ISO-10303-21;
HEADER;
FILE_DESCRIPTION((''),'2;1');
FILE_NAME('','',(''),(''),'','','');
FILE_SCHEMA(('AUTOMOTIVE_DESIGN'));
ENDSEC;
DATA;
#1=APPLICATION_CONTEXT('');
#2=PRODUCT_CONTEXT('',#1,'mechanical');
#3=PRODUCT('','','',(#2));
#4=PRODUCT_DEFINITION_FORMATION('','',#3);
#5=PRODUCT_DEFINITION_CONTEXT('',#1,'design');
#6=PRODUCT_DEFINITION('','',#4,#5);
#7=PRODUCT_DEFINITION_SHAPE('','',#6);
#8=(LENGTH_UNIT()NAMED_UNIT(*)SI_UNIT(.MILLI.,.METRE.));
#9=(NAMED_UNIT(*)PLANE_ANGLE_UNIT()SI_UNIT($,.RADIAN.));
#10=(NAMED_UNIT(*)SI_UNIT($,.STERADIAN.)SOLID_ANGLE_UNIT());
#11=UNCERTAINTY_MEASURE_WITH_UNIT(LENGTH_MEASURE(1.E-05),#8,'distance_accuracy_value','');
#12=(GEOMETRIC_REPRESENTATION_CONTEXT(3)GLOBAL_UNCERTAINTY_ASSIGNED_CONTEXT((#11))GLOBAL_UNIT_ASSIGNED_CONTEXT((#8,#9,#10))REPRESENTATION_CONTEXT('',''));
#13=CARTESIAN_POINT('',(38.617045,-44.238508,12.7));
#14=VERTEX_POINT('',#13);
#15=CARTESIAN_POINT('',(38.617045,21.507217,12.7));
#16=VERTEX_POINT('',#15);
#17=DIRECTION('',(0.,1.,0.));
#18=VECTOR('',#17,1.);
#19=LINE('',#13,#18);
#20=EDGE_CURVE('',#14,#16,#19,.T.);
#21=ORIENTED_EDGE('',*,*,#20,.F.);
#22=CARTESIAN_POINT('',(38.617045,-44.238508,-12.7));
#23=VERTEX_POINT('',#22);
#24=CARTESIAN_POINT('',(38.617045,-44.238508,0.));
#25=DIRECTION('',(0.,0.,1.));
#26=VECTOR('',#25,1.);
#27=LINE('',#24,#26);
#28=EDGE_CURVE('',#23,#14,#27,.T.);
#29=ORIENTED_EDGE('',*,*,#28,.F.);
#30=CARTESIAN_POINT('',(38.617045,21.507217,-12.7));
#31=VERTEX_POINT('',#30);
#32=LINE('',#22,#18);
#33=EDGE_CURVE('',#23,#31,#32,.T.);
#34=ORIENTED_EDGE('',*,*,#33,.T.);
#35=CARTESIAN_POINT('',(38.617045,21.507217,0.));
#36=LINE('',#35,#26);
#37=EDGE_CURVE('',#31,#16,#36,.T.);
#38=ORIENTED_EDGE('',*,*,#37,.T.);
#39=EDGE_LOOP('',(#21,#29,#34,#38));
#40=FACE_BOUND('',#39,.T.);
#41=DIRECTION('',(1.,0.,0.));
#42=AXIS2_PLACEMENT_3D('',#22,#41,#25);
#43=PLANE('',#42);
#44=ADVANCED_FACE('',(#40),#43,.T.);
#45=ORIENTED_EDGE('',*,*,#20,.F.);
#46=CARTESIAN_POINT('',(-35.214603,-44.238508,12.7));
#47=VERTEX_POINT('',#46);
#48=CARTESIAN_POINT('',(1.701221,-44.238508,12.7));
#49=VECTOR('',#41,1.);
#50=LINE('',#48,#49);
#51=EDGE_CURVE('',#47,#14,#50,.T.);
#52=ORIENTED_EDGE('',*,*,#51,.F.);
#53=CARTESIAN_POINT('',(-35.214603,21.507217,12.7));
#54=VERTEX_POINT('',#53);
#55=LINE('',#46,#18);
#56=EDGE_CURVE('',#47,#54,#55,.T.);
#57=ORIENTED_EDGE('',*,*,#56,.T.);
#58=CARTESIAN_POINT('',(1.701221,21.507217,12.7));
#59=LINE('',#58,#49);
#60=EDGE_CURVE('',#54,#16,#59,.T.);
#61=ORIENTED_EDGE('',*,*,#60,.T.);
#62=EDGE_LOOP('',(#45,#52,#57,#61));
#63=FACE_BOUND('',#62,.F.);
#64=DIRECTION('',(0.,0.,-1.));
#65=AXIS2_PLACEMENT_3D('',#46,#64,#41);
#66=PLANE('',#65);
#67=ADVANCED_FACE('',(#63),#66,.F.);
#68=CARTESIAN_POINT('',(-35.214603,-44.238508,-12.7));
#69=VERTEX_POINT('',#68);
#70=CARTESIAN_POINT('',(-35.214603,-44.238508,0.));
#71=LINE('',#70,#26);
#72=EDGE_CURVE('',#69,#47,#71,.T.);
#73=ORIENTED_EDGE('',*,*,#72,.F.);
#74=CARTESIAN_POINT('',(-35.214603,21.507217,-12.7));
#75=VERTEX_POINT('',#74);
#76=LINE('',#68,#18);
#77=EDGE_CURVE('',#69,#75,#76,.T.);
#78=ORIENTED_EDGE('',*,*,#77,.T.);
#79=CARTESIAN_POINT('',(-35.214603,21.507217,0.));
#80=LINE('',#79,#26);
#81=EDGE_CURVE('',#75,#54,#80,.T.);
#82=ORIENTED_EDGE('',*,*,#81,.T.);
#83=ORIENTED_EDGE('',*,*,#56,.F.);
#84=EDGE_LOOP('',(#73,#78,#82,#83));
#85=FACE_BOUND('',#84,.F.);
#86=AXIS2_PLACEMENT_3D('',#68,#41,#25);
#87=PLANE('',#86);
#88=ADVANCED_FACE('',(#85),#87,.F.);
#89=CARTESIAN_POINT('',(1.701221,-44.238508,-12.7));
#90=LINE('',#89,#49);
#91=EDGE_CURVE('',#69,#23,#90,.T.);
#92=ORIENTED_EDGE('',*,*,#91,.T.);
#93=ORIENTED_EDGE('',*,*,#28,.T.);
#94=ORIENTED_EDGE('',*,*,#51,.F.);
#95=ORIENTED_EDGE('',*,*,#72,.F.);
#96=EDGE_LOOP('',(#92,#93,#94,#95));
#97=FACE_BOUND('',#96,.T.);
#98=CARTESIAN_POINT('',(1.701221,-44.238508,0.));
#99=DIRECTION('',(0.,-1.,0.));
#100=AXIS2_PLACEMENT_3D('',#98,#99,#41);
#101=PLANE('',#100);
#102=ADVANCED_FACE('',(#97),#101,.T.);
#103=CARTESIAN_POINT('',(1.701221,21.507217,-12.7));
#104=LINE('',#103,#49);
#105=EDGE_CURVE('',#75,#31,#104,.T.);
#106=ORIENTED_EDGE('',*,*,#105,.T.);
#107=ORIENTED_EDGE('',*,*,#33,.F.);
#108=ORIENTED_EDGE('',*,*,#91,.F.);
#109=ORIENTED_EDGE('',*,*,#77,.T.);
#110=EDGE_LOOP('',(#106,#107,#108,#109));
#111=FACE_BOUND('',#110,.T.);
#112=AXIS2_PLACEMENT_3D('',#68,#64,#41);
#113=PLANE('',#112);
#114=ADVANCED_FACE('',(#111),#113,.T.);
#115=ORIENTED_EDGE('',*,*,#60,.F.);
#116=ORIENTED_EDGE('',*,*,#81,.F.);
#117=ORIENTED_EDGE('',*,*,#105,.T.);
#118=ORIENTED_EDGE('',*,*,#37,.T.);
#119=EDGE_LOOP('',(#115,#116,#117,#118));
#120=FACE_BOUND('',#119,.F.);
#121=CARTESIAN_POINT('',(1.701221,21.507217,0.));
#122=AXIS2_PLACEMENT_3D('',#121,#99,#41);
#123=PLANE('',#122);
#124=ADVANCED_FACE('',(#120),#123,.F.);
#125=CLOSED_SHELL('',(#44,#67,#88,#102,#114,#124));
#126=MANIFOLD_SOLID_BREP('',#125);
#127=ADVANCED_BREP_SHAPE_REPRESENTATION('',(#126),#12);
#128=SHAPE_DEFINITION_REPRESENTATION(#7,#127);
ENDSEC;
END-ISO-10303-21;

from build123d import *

# Parameters (mm, degrees)
F1_E0_TOP_W = 73.8316476345
F1_E0_TOP_H = 25.4
F2_DEPTH    = 65.7457243651


with BuildPart() as f2:
    # F1_E0_top (on explicit) → F2 (new body)
    with BuildSketch(Plane(origin=(-35.2146029472, -44.2385077477, -12.7), x_dir=(1, 0, 0), z_dir=(0, -1, 0))):
        with Locations((36.9158238173, 12.7)):
            Rectangle(F1_E0_TOP_W, F1_E0_TOP_H)
    extrude(amount=-F2_DEPTH)


solid = f2.part
